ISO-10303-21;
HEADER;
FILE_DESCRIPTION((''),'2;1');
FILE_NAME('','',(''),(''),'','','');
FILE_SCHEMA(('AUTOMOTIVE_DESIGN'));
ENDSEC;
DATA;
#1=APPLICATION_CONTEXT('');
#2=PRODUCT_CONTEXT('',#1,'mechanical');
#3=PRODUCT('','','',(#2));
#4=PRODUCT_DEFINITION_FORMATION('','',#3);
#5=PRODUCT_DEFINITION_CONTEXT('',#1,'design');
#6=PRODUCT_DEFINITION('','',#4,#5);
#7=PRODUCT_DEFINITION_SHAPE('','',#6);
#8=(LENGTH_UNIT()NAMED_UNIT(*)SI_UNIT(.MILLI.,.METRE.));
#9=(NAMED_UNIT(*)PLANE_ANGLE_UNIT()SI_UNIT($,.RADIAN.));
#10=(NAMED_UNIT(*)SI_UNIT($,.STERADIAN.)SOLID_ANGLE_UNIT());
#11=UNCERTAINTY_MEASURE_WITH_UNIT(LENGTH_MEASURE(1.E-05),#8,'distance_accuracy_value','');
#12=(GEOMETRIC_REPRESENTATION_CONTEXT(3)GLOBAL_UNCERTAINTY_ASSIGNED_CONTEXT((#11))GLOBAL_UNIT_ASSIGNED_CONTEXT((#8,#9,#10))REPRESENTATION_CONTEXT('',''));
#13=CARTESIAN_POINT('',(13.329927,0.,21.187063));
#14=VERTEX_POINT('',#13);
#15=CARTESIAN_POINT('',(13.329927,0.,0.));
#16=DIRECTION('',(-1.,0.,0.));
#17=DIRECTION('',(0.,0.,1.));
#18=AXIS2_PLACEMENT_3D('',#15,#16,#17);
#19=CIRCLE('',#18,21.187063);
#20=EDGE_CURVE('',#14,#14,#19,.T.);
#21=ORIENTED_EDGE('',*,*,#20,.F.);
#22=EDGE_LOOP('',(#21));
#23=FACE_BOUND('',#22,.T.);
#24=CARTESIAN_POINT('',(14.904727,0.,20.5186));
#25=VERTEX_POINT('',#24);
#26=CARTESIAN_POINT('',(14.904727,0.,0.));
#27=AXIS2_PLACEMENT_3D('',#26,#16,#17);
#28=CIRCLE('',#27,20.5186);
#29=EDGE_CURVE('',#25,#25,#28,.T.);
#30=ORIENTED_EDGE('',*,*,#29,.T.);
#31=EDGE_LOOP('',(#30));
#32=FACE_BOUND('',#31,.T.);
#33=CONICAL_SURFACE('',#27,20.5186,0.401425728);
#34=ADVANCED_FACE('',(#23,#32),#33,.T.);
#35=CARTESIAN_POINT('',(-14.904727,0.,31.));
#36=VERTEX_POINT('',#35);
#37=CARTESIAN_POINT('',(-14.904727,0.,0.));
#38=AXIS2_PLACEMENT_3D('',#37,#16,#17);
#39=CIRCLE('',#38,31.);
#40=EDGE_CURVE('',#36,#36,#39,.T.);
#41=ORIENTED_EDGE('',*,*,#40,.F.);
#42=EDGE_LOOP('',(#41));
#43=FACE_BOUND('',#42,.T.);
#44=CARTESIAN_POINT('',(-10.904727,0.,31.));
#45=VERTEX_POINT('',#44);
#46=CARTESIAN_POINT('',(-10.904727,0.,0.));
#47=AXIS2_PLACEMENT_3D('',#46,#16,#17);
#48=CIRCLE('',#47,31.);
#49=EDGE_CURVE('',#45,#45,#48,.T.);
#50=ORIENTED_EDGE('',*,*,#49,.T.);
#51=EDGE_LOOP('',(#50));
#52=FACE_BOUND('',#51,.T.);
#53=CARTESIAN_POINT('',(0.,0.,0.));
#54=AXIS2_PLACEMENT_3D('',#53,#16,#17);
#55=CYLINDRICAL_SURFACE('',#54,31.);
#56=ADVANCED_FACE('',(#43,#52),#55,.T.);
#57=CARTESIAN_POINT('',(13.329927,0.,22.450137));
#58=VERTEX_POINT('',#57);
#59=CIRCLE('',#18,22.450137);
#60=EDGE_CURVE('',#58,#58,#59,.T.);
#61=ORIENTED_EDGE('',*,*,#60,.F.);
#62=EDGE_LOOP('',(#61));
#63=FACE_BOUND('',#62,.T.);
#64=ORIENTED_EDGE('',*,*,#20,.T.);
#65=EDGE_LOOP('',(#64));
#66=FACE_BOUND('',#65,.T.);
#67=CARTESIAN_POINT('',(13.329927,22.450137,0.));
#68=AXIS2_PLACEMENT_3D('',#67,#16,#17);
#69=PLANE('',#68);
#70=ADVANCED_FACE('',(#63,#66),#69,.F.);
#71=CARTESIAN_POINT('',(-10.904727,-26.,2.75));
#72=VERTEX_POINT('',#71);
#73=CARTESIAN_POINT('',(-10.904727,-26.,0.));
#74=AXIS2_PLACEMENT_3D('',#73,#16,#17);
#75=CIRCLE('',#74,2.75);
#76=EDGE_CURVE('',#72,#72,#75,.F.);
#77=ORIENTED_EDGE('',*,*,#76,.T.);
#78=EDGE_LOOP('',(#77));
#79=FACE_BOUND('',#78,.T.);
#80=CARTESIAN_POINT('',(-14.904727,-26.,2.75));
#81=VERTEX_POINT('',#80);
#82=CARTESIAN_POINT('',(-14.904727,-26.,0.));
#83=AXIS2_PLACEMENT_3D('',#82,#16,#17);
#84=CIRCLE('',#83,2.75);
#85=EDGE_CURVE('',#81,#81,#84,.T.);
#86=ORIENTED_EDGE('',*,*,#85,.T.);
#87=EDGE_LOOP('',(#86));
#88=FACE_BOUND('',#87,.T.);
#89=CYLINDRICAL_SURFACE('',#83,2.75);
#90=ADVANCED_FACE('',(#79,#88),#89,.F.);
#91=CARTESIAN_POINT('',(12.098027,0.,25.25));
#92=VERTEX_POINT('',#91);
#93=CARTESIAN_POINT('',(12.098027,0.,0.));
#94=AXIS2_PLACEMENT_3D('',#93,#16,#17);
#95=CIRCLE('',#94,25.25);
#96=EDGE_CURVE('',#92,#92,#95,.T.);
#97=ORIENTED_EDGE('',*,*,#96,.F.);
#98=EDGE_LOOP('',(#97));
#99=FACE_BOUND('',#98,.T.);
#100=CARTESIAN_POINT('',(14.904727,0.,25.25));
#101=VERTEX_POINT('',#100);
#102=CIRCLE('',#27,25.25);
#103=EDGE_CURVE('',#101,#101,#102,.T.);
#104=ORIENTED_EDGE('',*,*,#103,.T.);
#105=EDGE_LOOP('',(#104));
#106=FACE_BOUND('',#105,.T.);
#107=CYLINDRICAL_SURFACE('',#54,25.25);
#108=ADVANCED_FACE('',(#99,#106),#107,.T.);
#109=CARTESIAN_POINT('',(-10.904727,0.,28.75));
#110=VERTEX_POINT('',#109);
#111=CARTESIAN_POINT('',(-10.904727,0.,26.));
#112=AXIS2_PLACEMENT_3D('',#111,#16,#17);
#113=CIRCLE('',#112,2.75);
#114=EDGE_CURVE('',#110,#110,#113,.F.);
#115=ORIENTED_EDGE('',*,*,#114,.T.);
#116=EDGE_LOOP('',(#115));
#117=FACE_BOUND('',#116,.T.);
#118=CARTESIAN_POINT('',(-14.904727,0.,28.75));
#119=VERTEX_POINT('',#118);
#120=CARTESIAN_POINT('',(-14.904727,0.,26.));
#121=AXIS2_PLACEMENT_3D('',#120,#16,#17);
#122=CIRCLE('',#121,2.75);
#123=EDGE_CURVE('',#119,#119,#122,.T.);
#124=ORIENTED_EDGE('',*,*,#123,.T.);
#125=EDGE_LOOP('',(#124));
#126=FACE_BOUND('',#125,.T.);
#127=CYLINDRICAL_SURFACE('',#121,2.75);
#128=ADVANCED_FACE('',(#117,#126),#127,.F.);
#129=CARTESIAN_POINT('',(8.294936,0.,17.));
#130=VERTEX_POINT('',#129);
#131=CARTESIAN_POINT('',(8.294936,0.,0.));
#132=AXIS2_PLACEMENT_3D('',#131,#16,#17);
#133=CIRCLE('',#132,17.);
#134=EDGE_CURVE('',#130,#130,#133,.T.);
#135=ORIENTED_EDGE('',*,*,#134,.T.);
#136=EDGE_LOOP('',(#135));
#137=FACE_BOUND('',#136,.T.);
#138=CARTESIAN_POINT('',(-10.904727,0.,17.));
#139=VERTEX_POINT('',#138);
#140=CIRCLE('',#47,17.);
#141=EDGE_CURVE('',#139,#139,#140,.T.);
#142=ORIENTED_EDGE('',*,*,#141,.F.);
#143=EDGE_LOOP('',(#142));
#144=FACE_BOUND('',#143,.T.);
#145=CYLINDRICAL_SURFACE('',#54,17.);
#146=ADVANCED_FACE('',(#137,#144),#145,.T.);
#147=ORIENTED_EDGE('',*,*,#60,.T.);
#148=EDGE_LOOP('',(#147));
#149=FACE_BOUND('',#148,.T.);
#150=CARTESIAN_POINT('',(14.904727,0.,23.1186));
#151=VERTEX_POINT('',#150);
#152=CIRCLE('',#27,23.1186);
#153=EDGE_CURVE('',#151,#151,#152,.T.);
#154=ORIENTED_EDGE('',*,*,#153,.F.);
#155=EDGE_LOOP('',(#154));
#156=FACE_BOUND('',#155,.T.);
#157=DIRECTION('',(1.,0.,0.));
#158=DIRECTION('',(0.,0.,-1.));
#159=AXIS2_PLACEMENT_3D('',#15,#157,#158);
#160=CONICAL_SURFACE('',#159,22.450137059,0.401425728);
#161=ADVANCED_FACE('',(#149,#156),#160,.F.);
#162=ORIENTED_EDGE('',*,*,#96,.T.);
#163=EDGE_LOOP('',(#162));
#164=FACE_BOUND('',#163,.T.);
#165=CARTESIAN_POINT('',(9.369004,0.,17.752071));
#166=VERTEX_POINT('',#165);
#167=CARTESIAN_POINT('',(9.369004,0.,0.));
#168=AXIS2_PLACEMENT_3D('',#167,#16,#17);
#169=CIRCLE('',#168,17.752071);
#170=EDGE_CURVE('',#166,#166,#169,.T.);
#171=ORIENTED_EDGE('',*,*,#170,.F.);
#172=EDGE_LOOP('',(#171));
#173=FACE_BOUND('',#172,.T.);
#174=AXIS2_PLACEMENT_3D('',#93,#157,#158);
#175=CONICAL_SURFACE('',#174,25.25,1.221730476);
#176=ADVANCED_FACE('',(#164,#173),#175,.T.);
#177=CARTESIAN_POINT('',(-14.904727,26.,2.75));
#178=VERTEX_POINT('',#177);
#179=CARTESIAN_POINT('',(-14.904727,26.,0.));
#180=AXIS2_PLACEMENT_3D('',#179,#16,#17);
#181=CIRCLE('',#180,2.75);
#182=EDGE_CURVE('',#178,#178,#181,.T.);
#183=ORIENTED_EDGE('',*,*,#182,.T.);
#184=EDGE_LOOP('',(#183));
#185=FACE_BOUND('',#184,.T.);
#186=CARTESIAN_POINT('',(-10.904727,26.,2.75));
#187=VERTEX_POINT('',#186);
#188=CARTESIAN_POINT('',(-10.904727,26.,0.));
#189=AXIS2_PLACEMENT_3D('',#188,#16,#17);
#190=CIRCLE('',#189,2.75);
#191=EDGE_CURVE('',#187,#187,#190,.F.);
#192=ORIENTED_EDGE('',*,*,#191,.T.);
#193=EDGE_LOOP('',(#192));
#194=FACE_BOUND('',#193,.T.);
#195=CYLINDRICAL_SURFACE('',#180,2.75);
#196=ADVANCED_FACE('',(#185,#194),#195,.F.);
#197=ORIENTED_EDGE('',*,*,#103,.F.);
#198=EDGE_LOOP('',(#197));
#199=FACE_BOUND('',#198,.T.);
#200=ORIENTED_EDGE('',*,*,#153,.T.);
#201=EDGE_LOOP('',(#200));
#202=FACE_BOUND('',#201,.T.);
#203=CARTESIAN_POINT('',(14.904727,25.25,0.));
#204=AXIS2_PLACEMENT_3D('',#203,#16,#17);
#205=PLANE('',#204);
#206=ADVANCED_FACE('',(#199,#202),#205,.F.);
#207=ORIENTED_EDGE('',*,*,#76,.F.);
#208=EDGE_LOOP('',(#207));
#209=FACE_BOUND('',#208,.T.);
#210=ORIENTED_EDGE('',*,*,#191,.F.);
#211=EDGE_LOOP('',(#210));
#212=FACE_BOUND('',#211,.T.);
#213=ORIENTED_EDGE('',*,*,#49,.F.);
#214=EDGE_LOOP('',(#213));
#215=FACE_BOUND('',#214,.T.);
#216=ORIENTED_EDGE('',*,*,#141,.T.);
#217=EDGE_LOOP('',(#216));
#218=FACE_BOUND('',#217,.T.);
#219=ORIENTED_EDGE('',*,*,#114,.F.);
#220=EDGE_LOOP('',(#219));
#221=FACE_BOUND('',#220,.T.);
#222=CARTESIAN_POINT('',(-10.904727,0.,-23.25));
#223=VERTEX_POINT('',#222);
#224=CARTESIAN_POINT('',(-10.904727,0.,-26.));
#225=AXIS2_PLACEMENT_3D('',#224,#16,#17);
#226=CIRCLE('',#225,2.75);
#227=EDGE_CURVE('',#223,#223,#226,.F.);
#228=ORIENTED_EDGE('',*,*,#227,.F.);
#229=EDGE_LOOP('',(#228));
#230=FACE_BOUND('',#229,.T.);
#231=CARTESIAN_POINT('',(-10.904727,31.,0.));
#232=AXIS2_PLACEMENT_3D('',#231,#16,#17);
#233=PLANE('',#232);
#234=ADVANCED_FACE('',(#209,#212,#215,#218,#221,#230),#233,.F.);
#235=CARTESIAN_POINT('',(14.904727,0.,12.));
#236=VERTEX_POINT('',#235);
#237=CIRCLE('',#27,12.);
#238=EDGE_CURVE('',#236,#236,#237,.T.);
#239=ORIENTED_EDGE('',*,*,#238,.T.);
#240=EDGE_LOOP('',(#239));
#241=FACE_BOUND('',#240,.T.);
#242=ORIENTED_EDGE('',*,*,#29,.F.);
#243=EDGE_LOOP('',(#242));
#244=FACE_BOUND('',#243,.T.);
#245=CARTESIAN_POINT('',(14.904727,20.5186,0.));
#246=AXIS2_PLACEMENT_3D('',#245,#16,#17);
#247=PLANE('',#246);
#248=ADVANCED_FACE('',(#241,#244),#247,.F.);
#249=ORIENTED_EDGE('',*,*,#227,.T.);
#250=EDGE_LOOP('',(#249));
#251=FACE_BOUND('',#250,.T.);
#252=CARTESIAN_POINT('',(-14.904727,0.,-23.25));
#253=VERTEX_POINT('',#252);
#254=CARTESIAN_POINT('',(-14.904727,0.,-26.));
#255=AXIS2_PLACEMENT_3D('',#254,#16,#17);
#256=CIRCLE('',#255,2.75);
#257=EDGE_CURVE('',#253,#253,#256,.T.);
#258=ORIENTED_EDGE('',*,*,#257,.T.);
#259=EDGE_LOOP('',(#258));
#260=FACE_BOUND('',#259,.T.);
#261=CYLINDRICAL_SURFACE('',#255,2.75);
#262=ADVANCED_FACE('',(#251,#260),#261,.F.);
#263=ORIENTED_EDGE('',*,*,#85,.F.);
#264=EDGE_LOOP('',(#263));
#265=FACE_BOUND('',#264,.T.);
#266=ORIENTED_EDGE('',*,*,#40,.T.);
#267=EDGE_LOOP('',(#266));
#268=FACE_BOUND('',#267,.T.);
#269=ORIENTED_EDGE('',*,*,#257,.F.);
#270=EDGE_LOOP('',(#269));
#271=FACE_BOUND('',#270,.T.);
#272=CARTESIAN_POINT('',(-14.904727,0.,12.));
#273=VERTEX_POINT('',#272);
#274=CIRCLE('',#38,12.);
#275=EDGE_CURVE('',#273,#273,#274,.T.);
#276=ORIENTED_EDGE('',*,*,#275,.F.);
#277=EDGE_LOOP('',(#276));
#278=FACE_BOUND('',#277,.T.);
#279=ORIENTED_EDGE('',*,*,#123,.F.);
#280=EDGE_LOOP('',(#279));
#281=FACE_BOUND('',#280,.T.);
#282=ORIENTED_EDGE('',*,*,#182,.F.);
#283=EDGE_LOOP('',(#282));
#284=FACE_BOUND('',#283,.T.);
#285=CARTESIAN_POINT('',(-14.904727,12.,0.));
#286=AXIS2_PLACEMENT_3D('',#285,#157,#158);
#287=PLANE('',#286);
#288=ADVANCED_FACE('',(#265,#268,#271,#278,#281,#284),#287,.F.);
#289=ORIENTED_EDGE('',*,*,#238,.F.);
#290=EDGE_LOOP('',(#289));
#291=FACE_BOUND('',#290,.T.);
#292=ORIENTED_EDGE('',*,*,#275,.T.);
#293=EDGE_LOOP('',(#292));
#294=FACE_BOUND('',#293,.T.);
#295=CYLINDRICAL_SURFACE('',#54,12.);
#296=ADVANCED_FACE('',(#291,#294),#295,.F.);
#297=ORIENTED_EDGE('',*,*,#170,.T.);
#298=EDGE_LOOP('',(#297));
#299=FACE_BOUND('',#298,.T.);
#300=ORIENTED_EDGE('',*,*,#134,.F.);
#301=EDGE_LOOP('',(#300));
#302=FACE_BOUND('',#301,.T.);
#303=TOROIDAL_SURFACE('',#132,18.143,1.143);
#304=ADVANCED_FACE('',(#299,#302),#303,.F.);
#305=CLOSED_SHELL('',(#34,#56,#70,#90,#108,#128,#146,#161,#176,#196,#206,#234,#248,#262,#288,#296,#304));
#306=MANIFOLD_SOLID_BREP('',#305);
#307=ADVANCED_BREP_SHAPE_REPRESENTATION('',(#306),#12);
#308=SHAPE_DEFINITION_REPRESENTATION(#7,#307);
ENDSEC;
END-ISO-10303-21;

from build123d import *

# Parameters (mm, degrees)
M5_START                     = -14.904727216
M5_CLEARANCE_HOLE1_OUTLINE_R = 2.75
M5_CLEARANCE_HOLE1_DEPTH     = 4
CIRPATTERN1_COUNT            = 4


# Read off the part's stored shape, not the designer's step: M5 Clearance Hole1
with BuildPart() as part:
    # Sketch1 → Revolve1 (revolve)
    with BuildSketch(Plane.XY, mode=Mode.PRIVATE) as revolve1_sk:
        with BuildLine():
            Line((-14.904727216, 12), (-14.904727216, 31))
            Line((-14.904727216, 31), (-10.904727216, 31))
            Line((-10.904727216, 31), (-10.904727216, 17))
            Line((-10.904727216, 17), (8.294935567, 17))
            ThreePointArc((8.294935567, 17), (8.950533434, 17.206709213), (9.369004233, 17.752070976))
            Line((9.369004233, 17.752070976), (12.098027216, 25.25))
            Line((12.098027216, 25.25), (14.904727216, 25.25))
            Line((14.904727216, 25.25), (14.904727216, 23.1186))
            Line((14.904727216, 23.1186), (13.329927216, 22.450137059))
            Line((13.329927216, 22.450137059), (13.329927216, 21.187062941))
            Line((13.329927216, 21.187062941), (14.904727216, 20.5186))
            Line((14.904727216, 20.5186), (14.904727216, 12))
            Line((14.904727216, 12), (-14.904727216, 12))
        make_face()
    revolve(revolve1_sk.sketch.rotate(Axis((0, 0, 0), (1, 0, 0)), 90), axis=Axis((0, 0, 0), (1, 0, 0)))

    # M5 Clearance Hole1 outline → M5 Clearance Hole1 (cut)
    with BuildSketch(Plane.YZ.offset(M5_START)):
        with Locations((0, 26)):
            Circle(M5_CLEARANCE_HOLE1_OUTLINE_R)
    m5_clearance_hole1 = extrude(amount=M5_CLEARANCE_HOLE1_DEPTH, mode=Mode.SUBTRACT)

    # CirPattern1: M5 Clearance Hole1 ×4 about axis
    cirpattern1_axis = Axis((0, 0, 0), (1, 0, 0))
    for i in range(1, CIRPATTERN1_COUNT):
        add(m5_clearance_hole1.rotate(cirpattern1_axis, i * 360 / CIRPATTERN1_COUNT), mode=Mode.SUBTRACT)


solid = part.part
